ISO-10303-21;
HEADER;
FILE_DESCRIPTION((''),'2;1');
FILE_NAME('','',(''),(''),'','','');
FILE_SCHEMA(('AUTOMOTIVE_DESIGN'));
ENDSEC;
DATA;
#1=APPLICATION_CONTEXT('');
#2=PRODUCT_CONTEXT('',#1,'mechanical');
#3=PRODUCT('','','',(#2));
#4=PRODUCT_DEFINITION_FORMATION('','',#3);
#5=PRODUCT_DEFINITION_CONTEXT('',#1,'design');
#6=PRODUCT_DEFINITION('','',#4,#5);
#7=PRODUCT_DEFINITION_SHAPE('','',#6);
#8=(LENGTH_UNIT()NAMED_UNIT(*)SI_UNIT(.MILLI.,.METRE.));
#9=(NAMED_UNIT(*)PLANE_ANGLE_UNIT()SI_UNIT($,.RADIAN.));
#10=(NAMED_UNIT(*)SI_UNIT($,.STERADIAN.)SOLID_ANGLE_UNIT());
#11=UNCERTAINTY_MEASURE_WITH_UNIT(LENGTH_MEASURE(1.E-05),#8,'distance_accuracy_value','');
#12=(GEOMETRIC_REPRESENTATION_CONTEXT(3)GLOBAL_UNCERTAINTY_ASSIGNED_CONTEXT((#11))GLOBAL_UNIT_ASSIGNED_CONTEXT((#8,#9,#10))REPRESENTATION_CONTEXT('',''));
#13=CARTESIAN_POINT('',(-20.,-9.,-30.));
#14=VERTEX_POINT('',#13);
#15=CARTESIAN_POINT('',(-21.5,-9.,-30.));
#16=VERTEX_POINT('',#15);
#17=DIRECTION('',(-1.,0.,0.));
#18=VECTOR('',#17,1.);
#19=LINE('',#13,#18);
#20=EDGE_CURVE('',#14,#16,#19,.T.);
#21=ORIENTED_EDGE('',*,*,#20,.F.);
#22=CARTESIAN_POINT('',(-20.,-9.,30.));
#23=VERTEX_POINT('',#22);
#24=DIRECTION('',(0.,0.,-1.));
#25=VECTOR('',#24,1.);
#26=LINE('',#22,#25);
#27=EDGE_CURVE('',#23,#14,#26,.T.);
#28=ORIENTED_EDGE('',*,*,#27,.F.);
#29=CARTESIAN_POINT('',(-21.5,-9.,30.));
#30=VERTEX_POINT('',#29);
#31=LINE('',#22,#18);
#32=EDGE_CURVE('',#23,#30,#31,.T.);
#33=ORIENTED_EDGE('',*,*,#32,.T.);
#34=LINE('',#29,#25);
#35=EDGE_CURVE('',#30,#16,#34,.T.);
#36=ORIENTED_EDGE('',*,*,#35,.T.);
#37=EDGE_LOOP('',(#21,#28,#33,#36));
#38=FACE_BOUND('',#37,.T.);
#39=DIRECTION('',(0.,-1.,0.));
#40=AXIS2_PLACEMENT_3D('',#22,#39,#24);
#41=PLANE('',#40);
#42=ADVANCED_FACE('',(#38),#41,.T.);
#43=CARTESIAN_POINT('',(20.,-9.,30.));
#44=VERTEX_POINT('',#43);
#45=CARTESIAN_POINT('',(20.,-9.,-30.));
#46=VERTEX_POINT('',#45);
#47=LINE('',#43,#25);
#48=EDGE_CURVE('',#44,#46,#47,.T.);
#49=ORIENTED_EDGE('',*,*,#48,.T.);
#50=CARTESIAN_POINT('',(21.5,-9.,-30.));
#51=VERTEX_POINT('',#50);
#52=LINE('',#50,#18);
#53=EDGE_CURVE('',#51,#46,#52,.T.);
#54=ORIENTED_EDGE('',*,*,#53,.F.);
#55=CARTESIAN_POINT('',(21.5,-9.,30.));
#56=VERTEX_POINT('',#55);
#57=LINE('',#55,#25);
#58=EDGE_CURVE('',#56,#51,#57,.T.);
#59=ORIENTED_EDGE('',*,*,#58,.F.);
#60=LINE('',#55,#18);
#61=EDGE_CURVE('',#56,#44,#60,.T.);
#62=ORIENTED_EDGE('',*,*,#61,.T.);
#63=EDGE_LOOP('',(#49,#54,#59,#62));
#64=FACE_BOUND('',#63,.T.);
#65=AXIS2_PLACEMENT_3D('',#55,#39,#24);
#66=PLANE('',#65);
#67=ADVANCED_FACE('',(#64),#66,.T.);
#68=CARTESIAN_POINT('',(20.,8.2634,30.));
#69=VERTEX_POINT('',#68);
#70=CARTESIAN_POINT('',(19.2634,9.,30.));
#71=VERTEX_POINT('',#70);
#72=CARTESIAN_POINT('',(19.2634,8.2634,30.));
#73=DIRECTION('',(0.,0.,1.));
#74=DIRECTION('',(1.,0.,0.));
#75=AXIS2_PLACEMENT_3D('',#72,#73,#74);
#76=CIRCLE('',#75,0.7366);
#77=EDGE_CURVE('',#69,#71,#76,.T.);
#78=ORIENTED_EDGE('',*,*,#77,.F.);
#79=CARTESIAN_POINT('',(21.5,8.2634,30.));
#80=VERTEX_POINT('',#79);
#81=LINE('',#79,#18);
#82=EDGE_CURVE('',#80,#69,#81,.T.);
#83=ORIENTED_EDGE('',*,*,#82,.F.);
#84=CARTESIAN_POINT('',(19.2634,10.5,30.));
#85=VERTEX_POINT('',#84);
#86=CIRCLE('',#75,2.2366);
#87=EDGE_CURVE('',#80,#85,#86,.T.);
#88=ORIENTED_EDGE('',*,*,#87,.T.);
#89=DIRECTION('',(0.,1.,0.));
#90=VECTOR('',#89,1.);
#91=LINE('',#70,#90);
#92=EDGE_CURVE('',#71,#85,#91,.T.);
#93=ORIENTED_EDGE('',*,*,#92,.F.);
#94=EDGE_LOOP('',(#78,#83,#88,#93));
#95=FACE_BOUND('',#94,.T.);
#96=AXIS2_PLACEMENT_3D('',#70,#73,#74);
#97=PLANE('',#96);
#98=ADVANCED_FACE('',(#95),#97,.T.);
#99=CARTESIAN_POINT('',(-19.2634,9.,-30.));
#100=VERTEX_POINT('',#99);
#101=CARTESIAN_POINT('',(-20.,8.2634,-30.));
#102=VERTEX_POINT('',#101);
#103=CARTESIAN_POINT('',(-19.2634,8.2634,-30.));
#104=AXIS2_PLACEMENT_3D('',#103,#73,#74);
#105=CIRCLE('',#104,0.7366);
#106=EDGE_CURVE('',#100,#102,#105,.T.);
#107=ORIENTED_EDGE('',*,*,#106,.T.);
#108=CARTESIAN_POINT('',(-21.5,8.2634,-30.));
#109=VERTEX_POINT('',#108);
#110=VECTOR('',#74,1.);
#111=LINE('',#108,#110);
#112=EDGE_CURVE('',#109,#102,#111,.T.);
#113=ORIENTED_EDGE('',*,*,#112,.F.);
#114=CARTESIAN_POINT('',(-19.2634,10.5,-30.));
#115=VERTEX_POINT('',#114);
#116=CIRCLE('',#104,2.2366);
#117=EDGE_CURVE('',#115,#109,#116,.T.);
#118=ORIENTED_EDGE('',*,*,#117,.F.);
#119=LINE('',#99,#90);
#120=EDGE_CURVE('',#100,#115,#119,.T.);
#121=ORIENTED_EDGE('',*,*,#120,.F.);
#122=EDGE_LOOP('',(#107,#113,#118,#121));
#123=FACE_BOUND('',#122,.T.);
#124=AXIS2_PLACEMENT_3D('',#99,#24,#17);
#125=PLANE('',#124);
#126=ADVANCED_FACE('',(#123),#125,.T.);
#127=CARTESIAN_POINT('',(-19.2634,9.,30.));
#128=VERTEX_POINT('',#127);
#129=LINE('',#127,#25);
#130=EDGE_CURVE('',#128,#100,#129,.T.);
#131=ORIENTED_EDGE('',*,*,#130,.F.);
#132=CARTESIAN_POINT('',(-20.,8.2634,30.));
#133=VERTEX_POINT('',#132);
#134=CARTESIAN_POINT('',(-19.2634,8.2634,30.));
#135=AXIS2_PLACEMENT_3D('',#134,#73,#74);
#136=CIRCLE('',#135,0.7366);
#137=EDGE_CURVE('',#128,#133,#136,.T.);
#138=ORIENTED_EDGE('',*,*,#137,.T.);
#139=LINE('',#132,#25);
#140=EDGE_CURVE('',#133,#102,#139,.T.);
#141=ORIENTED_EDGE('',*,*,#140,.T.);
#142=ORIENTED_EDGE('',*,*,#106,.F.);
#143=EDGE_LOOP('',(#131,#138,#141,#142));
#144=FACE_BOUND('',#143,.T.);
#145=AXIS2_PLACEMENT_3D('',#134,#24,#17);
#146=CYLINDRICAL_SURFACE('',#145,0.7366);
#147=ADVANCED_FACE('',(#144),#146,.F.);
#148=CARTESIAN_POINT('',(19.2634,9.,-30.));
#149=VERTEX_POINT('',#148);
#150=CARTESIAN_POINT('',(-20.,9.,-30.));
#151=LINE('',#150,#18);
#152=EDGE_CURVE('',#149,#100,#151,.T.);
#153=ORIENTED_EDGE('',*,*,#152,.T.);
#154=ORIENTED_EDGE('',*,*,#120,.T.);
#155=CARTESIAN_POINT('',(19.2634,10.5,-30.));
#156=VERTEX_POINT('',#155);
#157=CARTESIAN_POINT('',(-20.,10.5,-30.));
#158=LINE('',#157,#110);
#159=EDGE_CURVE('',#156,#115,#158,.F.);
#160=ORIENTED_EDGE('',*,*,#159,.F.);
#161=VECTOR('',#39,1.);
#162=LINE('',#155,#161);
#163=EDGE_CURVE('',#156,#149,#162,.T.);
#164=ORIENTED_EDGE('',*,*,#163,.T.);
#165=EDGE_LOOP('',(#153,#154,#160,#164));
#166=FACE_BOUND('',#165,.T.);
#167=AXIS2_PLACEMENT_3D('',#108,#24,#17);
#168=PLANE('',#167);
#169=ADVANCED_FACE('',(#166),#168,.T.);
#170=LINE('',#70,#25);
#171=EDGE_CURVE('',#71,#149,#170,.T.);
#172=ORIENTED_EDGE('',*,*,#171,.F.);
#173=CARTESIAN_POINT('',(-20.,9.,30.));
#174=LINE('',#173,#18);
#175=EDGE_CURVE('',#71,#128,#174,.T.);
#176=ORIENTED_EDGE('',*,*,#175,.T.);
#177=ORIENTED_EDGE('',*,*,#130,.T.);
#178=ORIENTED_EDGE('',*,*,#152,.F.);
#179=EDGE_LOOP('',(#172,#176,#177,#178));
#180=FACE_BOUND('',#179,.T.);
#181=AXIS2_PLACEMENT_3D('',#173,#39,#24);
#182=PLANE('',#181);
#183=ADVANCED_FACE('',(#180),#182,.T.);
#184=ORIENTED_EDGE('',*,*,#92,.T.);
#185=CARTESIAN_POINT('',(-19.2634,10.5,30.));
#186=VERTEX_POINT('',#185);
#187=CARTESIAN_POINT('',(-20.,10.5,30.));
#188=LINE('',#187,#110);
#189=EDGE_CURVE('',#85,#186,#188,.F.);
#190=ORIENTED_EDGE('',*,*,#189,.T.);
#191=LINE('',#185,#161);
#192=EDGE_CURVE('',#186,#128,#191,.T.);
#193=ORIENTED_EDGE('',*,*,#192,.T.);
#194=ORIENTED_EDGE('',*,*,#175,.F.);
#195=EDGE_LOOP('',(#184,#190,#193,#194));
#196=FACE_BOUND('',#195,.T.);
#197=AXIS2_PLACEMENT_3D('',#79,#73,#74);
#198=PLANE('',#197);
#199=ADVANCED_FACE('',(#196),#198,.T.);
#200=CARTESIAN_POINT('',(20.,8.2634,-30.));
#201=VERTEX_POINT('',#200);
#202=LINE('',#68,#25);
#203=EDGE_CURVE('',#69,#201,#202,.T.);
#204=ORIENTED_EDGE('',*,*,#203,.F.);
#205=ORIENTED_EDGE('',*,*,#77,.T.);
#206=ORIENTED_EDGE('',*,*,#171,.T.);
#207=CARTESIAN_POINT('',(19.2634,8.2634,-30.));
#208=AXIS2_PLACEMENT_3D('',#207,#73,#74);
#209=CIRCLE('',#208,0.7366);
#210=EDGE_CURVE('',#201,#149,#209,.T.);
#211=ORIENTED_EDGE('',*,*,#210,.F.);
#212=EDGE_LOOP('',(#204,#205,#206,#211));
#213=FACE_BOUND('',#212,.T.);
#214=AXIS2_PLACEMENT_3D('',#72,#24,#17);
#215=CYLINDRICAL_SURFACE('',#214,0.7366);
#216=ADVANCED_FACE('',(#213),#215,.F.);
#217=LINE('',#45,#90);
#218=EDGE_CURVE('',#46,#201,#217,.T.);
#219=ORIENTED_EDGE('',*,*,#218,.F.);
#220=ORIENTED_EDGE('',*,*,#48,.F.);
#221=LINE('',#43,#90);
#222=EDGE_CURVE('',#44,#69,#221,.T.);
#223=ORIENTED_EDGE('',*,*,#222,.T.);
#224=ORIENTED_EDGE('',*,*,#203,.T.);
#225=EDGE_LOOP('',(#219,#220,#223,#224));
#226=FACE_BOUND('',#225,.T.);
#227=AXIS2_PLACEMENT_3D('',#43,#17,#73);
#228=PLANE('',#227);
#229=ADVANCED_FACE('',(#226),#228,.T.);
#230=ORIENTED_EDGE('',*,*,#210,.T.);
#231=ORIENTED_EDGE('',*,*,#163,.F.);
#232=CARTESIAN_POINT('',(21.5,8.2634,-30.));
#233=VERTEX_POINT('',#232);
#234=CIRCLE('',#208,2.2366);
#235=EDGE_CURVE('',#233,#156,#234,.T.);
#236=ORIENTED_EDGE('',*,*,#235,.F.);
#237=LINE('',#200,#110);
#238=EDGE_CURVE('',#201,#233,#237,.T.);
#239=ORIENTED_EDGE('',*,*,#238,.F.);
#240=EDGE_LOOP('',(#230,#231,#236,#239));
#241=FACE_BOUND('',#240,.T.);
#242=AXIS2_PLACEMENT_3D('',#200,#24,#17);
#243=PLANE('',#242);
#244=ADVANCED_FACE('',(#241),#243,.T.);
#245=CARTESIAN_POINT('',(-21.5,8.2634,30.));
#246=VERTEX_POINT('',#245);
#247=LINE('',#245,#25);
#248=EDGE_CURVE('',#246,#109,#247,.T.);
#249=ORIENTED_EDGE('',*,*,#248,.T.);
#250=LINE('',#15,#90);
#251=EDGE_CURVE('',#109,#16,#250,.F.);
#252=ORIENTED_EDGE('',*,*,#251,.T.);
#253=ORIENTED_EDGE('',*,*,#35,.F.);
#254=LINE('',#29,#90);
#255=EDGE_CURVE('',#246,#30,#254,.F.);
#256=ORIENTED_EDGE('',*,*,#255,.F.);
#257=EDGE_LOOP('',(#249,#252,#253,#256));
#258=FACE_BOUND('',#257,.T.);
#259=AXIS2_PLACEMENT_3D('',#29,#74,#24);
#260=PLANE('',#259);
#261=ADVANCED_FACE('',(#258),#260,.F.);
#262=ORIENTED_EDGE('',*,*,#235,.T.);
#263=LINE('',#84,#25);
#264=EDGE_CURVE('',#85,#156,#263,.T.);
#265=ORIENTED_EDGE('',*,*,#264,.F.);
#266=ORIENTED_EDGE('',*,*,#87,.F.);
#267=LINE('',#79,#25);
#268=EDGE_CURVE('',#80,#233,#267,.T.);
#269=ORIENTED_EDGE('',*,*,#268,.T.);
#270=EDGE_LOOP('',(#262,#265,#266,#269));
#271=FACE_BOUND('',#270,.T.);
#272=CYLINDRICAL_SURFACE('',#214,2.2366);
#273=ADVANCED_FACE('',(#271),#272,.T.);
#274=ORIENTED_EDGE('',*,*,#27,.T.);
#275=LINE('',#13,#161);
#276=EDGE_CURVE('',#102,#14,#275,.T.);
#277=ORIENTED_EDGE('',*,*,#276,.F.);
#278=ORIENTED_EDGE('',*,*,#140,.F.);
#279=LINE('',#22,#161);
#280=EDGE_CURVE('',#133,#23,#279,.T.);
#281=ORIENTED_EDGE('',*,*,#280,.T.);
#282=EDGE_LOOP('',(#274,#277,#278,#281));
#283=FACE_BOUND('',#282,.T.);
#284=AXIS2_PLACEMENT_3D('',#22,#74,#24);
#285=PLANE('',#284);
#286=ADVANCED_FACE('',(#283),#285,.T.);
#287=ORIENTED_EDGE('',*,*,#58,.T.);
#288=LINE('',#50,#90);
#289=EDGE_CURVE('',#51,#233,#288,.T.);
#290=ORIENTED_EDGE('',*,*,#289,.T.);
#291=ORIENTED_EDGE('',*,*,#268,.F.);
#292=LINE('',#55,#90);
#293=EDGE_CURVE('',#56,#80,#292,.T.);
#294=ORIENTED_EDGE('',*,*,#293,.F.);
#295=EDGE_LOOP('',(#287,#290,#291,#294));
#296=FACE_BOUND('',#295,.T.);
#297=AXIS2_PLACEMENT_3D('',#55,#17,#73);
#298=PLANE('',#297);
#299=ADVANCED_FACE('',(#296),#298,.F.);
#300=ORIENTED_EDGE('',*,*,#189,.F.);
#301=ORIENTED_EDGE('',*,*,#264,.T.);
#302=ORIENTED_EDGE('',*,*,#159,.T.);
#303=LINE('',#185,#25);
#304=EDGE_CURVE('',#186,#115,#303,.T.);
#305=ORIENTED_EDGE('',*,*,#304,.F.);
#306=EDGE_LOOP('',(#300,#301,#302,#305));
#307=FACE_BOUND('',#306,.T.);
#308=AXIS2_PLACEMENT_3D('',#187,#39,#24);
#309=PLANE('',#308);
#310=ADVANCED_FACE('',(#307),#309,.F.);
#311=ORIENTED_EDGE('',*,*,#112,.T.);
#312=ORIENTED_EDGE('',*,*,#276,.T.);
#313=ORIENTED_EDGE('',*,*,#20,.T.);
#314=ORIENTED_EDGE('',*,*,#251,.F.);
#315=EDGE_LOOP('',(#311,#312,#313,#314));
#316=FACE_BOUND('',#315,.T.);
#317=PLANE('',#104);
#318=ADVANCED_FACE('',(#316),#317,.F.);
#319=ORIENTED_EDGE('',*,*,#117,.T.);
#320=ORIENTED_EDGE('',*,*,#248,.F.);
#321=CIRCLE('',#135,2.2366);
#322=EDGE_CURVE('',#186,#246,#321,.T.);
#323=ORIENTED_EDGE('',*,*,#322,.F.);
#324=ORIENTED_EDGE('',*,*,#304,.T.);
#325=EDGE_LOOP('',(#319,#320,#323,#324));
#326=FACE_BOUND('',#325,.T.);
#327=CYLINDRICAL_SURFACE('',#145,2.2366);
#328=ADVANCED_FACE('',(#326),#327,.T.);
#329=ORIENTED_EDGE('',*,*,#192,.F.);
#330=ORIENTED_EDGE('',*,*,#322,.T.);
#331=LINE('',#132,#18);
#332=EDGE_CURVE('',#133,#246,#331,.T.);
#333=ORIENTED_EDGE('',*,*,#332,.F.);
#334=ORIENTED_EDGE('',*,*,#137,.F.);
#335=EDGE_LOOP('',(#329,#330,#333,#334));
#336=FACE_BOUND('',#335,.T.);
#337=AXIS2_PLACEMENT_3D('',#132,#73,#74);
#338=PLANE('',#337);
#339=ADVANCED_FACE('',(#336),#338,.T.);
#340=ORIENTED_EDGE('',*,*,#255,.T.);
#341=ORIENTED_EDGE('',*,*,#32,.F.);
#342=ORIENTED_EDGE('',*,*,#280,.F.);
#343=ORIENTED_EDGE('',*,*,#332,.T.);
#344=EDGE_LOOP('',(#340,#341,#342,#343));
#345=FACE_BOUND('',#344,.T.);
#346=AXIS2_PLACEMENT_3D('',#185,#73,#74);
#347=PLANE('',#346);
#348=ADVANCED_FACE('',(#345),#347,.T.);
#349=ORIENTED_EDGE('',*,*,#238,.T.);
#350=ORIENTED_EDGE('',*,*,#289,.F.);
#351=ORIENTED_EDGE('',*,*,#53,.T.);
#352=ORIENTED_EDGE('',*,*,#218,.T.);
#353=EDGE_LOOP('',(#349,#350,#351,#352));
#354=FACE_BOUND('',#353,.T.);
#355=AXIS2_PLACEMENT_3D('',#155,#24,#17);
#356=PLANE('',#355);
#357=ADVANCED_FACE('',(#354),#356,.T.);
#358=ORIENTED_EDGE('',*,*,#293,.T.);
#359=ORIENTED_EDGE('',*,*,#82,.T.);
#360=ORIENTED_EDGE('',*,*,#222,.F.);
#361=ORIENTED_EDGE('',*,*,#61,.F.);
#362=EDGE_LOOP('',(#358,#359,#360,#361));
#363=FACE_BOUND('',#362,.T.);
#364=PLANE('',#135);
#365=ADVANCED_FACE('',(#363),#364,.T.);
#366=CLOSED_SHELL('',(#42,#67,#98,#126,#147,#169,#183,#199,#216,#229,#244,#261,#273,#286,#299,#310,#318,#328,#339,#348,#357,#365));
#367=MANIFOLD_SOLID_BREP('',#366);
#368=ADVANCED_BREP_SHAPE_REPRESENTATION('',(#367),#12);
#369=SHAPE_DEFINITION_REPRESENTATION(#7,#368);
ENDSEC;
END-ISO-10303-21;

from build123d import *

# Parameters (mm, degrees)
BASE_FLANGE1_DEPTH = 30


# Sheet-metal steps are written as plain solids
with BuildPart() as part:
    # Sketch1 → Base-Flange1 (new, symmetric)
    with BuildSketch(Plane.XY):
        with BuildLine():
            Line((-20, -9), (-20, 8.2634))
            ThreePointArc((-20, 8.2634), (-19.784254855, 8.784254855), (-19.2634, 9))
            Line((-19.2634, 9), (19.2634, 9))
            ThreePointArc((19.2634, 9), (19.784254855, 8.784254855), (20, 8.2634))
            Line((20, 8.2634), (20, -9))
            Line((20, -9), (21.5, -9))
            Line((21.5, -9), (21.5, 8.2634))
            ThreePointArc((21.5, 8.2634), (20.844915027, 9.844915027), (19.2634, 10.5))
            Line((19.2634, 10.5), (-19.2634, 10.5))
            ThreePointArc((-19.2634, 10.5), (-20.844915027, 9.844915027), (-21.5, 8.2634))
            Line((-21.5, 8.2634), (-21.5, -9))
            Line((-21.5, -9), (-20, -9))
        make_face()
    extrude(amount=BASE_FLANGE1_DEPTH, both=True)


solid = part.part
